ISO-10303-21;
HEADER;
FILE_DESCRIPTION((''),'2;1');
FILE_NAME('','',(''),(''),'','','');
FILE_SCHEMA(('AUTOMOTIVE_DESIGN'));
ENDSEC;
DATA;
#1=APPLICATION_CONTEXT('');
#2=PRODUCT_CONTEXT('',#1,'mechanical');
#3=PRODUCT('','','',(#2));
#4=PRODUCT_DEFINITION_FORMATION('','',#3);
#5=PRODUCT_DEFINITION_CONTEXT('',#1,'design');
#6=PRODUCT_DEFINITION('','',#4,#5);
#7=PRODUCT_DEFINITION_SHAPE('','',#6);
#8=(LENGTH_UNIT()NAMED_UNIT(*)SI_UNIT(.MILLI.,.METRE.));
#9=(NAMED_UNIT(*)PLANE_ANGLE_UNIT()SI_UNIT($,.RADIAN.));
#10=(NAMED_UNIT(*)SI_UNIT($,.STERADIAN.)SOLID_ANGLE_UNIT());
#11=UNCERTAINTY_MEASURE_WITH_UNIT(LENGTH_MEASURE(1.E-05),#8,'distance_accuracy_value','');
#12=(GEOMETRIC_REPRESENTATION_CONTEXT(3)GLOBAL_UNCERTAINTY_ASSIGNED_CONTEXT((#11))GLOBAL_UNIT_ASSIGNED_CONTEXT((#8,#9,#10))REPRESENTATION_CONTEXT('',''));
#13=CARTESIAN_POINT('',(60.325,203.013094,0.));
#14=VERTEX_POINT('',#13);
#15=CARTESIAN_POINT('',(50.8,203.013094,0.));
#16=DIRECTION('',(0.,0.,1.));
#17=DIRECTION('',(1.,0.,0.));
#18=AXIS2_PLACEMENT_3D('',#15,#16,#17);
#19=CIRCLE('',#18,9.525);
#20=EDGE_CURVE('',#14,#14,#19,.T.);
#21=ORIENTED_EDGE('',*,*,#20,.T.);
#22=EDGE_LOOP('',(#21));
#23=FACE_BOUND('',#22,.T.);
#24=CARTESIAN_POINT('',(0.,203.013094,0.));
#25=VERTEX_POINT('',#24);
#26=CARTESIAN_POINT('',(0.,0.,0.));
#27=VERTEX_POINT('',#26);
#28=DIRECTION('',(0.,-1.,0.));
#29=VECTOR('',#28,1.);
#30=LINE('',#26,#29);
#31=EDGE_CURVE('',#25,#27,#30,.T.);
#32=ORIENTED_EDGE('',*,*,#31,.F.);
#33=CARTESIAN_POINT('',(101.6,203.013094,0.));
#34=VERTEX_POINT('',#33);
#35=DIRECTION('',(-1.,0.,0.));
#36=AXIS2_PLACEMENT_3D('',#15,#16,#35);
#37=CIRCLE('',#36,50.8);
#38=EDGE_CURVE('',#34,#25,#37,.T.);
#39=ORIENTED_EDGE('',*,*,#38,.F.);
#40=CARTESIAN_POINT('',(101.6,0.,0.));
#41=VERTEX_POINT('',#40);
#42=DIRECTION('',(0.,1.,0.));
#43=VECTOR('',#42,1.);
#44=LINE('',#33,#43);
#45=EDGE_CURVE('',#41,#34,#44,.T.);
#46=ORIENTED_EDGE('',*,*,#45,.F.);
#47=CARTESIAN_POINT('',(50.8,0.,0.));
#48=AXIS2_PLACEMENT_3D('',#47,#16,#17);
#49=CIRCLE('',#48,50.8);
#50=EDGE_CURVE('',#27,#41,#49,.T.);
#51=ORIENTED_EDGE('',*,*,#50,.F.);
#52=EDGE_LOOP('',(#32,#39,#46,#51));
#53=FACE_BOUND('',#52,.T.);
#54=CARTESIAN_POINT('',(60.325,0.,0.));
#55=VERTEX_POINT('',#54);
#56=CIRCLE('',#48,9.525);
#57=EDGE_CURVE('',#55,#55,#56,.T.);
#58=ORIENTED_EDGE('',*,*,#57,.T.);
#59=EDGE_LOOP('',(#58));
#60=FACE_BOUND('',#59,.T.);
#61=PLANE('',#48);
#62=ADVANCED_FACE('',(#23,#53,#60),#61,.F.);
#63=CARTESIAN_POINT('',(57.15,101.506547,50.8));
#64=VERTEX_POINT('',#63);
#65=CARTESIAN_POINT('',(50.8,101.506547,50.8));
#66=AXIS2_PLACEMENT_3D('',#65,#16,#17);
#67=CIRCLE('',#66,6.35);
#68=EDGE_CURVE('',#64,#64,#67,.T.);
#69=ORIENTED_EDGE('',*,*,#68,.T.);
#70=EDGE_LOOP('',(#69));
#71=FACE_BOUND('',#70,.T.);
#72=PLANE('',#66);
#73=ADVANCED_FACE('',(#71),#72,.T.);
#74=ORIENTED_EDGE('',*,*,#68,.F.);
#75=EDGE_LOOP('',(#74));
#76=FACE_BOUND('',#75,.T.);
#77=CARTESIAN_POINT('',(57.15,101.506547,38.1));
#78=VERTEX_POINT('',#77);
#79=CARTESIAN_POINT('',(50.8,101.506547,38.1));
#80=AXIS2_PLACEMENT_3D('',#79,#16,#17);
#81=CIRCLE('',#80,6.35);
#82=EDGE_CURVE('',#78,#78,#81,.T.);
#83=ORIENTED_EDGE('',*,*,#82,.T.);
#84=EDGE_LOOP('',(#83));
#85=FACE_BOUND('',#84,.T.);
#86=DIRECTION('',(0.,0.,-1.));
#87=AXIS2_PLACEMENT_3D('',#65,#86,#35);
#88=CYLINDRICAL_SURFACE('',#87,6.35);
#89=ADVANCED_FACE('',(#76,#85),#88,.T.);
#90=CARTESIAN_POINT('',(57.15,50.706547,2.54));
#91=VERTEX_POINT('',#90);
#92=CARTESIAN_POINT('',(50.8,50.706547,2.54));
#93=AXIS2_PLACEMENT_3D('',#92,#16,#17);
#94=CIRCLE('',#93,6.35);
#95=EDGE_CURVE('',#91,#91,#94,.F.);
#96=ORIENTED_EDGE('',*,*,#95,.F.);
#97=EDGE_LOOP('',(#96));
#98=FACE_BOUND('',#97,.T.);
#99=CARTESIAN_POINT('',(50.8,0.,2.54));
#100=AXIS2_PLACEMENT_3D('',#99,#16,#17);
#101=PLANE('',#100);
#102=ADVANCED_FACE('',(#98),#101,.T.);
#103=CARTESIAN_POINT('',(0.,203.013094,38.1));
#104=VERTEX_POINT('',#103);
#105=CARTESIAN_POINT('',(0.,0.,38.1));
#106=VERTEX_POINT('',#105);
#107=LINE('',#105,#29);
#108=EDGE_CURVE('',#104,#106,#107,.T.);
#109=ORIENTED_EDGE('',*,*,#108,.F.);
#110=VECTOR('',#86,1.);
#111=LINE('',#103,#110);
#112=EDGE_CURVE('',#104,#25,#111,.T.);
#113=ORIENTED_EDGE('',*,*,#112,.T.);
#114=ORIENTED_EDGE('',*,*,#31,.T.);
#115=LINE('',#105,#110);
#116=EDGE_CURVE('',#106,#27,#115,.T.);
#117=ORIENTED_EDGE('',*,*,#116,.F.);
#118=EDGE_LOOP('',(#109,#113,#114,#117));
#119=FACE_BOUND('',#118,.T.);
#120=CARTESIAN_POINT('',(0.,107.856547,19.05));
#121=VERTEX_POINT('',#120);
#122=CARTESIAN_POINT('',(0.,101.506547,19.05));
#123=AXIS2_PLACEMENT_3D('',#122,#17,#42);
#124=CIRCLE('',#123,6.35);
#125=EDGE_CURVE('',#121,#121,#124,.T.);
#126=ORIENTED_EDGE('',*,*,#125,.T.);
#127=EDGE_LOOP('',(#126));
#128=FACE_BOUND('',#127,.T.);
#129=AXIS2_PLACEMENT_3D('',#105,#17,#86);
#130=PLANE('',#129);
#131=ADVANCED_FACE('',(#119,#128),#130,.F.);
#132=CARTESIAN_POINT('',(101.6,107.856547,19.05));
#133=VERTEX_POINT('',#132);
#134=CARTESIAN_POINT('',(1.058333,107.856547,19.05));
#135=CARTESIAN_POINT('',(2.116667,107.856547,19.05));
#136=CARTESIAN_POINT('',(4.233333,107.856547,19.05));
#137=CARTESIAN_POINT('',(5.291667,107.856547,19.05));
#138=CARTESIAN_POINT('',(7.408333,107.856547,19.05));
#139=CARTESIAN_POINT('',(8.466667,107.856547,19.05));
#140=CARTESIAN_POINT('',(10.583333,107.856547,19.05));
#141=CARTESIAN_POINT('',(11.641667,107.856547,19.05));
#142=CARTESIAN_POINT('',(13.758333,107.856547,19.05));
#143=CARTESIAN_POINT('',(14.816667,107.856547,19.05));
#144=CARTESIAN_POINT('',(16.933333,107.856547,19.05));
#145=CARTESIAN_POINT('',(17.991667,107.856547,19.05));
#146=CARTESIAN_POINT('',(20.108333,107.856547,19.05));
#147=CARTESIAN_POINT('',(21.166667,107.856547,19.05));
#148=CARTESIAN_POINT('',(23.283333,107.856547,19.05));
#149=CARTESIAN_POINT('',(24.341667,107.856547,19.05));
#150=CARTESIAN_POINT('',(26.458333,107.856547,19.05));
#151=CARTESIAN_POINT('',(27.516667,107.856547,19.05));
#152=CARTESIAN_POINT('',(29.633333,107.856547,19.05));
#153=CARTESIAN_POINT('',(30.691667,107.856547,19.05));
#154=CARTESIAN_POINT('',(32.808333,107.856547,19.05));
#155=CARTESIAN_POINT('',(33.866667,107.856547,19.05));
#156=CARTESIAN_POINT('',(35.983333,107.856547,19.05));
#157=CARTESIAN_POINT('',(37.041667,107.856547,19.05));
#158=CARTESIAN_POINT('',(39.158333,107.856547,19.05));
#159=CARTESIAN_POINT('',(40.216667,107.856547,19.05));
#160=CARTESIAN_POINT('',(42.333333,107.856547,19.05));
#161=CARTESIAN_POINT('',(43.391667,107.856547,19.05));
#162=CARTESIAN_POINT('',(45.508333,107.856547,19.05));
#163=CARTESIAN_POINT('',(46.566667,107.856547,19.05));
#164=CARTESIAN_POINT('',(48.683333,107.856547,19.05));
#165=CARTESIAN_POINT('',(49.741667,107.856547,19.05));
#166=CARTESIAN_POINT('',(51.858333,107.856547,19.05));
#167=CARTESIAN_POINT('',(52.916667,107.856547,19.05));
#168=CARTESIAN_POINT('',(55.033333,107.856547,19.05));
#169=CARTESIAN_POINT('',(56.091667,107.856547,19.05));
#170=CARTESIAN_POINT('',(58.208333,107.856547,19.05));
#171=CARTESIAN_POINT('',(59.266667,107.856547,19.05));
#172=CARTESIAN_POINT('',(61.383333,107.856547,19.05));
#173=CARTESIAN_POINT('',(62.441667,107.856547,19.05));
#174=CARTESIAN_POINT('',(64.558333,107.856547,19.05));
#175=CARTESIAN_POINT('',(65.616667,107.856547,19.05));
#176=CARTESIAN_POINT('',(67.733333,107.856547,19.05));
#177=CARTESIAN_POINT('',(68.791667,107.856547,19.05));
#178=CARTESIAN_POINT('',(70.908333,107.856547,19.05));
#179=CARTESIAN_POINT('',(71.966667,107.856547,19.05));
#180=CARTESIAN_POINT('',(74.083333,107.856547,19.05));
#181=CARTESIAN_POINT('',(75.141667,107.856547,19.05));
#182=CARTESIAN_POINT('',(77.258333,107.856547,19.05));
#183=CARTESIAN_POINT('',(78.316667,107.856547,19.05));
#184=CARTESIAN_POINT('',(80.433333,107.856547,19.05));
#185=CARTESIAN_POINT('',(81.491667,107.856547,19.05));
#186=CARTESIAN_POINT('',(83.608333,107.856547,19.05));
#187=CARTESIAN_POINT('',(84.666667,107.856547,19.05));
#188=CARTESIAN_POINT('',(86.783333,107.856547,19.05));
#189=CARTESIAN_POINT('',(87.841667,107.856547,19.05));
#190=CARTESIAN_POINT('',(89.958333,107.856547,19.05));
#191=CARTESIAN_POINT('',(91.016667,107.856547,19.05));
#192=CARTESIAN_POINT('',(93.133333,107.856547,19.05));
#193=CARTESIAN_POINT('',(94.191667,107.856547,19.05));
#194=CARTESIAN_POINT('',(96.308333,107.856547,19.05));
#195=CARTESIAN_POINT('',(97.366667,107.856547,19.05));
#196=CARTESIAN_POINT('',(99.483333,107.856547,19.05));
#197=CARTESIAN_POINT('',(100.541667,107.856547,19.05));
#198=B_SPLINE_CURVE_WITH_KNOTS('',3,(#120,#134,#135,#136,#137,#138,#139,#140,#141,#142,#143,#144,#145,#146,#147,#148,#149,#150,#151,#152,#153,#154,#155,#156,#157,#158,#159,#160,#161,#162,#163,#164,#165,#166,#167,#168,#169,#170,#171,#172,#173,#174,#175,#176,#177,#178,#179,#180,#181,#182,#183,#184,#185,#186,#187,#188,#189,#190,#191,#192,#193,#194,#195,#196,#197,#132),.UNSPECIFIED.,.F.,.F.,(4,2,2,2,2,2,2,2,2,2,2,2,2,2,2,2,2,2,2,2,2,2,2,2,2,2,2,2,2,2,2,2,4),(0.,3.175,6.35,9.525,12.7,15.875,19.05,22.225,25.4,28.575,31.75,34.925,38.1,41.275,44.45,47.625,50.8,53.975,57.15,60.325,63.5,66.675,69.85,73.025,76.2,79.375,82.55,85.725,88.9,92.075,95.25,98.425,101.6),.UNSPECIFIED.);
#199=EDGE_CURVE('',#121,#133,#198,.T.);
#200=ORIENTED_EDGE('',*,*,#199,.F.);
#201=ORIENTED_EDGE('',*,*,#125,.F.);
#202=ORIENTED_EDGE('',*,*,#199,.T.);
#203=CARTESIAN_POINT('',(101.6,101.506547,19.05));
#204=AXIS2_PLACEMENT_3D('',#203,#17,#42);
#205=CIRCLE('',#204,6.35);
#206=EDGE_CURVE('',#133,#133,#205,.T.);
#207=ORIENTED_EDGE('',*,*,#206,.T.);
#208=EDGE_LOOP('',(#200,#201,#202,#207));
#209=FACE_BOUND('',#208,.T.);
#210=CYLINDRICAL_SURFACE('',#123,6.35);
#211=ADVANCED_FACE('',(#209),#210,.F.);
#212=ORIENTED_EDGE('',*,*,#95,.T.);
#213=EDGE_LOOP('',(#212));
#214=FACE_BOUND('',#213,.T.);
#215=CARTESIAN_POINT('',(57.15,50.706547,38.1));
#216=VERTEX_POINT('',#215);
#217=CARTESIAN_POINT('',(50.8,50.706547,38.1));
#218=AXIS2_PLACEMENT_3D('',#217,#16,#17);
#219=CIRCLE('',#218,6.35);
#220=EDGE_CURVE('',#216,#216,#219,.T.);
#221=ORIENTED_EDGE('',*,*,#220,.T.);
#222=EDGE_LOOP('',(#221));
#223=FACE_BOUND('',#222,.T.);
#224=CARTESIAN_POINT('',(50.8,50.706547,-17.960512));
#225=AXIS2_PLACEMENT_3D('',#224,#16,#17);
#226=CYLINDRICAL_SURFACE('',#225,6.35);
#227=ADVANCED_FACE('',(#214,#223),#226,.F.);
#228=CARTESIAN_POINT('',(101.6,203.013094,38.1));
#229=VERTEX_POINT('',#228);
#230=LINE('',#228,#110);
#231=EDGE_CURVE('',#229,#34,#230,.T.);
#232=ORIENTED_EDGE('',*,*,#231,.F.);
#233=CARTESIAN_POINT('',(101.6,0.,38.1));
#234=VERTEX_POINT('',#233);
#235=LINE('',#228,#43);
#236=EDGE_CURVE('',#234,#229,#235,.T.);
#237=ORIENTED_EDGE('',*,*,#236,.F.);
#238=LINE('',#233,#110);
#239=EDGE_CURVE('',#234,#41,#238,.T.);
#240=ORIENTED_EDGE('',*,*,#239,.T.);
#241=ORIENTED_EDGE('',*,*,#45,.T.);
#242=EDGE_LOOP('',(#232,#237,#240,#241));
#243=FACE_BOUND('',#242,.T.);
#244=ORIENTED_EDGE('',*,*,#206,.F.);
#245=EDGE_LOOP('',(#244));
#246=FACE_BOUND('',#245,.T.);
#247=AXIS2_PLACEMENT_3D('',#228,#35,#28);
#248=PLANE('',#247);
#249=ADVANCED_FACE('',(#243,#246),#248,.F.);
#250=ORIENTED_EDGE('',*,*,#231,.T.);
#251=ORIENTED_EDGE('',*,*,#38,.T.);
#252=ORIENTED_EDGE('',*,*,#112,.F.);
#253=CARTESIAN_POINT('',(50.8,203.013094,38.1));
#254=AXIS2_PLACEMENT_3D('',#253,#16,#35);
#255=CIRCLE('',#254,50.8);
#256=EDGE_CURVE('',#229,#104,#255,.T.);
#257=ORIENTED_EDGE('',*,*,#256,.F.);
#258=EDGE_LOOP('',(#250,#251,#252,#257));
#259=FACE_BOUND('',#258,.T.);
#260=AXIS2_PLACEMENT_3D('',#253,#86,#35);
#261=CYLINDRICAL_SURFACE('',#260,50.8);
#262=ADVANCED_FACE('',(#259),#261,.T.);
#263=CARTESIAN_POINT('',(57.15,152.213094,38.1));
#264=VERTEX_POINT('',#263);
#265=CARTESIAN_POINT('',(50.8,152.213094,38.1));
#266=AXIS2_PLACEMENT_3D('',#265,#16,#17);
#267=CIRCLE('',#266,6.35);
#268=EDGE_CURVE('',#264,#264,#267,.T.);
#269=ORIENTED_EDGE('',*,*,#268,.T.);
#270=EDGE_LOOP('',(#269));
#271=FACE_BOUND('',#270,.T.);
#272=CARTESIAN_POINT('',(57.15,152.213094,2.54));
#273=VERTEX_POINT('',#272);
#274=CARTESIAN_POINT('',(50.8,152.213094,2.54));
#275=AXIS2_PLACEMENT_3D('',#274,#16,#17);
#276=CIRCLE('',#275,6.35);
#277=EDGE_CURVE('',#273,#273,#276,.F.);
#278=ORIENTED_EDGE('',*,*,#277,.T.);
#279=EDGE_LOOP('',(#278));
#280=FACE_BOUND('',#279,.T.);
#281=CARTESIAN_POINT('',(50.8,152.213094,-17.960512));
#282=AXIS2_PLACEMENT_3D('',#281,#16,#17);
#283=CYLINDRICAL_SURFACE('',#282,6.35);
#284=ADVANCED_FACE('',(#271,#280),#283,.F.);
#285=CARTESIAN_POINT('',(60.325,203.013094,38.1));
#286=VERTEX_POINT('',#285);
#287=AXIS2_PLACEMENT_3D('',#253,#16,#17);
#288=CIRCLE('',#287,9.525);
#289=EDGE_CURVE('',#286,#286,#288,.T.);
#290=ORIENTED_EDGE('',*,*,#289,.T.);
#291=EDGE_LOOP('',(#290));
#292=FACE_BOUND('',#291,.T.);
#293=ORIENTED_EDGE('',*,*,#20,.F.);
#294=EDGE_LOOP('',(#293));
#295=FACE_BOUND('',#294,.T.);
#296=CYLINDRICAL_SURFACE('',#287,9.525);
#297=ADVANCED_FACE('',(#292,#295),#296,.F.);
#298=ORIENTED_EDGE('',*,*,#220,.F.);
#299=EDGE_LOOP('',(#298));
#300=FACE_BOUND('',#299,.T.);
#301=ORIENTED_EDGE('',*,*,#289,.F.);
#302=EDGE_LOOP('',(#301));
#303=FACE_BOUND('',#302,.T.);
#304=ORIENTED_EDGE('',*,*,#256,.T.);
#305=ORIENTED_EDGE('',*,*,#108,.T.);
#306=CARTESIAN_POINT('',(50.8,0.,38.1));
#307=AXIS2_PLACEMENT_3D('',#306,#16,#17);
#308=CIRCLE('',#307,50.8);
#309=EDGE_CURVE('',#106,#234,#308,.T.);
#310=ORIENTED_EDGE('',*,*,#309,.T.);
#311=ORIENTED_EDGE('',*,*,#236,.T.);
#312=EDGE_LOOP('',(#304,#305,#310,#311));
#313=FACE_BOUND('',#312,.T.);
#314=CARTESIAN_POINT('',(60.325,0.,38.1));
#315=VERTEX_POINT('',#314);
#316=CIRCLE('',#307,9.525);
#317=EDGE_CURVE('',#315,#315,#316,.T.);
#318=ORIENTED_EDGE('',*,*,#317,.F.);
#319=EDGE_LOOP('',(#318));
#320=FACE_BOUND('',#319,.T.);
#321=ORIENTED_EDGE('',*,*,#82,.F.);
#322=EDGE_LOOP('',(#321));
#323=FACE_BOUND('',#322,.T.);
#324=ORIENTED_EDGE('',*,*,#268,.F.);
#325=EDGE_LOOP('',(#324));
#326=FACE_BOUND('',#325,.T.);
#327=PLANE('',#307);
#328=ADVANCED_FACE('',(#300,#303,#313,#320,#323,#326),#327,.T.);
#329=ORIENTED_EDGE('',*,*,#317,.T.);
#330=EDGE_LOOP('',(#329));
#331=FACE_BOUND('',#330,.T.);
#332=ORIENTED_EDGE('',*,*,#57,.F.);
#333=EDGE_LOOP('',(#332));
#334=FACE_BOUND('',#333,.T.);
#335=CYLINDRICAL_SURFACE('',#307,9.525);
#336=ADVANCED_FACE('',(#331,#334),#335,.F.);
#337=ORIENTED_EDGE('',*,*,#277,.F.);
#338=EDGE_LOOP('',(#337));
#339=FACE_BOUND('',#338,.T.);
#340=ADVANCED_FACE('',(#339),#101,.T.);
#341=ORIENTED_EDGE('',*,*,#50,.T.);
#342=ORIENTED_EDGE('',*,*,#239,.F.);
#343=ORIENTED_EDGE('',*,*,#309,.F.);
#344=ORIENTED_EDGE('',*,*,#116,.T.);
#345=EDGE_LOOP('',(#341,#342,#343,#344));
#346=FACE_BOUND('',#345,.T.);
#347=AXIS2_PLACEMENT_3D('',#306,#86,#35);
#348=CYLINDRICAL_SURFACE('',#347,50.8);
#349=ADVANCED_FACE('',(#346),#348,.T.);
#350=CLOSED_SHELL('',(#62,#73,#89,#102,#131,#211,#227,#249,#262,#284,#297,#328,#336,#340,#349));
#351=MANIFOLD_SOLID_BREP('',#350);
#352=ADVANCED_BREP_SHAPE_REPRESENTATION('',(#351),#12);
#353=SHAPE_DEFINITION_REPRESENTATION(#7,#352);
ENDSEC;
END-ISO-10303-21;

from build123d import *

# Parameters (mm, degrees)
BOSS_EXTRUDE1_DEPTH     = 38.1
SKETCH2_R               = 6.35
CUT_EXTRUDE1_DEPTH      = 277.034883433
ADVANCEDHOLE3_OUTLINE_R = 9.525
ADVANCEDHOLE3_DEPTH     = 38.1
SKETCH21_R              = 6.35
CUT_EXTRUDE2_DEPTH      = 35.56
SKETCH23_R              = 6.35
BOSS_EXTRUDE2_DEPTH     = 12.7


# Read off the part's stored shape, not the designer's step: AdvancedHole3
with BuildPart() as part:
    # Sketch1 → Boss-Extrude1 (new body)
    with BuildSketch(Plane.XY):
        with BuildLine():
            Line((0, 0), (0, 203.013094366))
            ThreePointArc((0, 203.013094366), (50.8, 253.813094366), (101.6, 203.013094366))
            Line((101.6, 203.013094366), (101.6, 0))
            ThreePointArc((101.6, 0), (50.8, -50.8), (0, 0))
        make_face()
    extrude(amount=BOSS_EXTRUDE1_DEPTH)

    # Sketch2 → Cut-Extrude1 (cut, through all)
    with BuildSketch(Plane(origin=(101.6, 0, 0), x_dir=(0, 0, -1), z_dir=(1, 0, 0))):
        with Locations(Location((-19.05, 101.506547183, 0), (0, 0, 90))):
            Circle(SKETCH2_R)
    extrude(amount=-CUT_EXTRUDE1_DEPTH, mode=Mode.SUBTRACT)

    # AdvancedHole3 outline → AdvancedHole3 (cut)
    with BuildSketch(Plane.XY):
        with Locations((50.8, 203.013094366)):
            Circle(ADVANCEDHOLE3_OUTLINE_R)
        with Locations((50.8, 0)):
            Circle(ADVANCEDHOLE3_OUTLINE_R)
    extrude(amount=ADVANCEDHOLE3_DEPTH, mode=Mode.SUBTRACT)

    # Sketch21 → Cut-Extrude2 (cut)
    with BuildSketch(Plane.XY.offset(38.1)):
        with Locations((50.8, 50.706547183)):
            Circle(SKETCH21_R)
        with Locations((50.8, 152.213094366)):
            Circle(SKETCH21_R)
    extrude(amount=-CUT_EXTRUDE2_DEPTH, mode=Mode.SUBTRACT)

    # Sketch23 → Boss-Extrude2 (add)
    with BuildSketch(Plane.XY.offset(38.1)):
        with Locations((50.8, 101.506547183)):
            Circle(SKETCH23_R)
    extrude(amount=BOSS_EXTRUDE2_DEPTH)


solid = part.part
